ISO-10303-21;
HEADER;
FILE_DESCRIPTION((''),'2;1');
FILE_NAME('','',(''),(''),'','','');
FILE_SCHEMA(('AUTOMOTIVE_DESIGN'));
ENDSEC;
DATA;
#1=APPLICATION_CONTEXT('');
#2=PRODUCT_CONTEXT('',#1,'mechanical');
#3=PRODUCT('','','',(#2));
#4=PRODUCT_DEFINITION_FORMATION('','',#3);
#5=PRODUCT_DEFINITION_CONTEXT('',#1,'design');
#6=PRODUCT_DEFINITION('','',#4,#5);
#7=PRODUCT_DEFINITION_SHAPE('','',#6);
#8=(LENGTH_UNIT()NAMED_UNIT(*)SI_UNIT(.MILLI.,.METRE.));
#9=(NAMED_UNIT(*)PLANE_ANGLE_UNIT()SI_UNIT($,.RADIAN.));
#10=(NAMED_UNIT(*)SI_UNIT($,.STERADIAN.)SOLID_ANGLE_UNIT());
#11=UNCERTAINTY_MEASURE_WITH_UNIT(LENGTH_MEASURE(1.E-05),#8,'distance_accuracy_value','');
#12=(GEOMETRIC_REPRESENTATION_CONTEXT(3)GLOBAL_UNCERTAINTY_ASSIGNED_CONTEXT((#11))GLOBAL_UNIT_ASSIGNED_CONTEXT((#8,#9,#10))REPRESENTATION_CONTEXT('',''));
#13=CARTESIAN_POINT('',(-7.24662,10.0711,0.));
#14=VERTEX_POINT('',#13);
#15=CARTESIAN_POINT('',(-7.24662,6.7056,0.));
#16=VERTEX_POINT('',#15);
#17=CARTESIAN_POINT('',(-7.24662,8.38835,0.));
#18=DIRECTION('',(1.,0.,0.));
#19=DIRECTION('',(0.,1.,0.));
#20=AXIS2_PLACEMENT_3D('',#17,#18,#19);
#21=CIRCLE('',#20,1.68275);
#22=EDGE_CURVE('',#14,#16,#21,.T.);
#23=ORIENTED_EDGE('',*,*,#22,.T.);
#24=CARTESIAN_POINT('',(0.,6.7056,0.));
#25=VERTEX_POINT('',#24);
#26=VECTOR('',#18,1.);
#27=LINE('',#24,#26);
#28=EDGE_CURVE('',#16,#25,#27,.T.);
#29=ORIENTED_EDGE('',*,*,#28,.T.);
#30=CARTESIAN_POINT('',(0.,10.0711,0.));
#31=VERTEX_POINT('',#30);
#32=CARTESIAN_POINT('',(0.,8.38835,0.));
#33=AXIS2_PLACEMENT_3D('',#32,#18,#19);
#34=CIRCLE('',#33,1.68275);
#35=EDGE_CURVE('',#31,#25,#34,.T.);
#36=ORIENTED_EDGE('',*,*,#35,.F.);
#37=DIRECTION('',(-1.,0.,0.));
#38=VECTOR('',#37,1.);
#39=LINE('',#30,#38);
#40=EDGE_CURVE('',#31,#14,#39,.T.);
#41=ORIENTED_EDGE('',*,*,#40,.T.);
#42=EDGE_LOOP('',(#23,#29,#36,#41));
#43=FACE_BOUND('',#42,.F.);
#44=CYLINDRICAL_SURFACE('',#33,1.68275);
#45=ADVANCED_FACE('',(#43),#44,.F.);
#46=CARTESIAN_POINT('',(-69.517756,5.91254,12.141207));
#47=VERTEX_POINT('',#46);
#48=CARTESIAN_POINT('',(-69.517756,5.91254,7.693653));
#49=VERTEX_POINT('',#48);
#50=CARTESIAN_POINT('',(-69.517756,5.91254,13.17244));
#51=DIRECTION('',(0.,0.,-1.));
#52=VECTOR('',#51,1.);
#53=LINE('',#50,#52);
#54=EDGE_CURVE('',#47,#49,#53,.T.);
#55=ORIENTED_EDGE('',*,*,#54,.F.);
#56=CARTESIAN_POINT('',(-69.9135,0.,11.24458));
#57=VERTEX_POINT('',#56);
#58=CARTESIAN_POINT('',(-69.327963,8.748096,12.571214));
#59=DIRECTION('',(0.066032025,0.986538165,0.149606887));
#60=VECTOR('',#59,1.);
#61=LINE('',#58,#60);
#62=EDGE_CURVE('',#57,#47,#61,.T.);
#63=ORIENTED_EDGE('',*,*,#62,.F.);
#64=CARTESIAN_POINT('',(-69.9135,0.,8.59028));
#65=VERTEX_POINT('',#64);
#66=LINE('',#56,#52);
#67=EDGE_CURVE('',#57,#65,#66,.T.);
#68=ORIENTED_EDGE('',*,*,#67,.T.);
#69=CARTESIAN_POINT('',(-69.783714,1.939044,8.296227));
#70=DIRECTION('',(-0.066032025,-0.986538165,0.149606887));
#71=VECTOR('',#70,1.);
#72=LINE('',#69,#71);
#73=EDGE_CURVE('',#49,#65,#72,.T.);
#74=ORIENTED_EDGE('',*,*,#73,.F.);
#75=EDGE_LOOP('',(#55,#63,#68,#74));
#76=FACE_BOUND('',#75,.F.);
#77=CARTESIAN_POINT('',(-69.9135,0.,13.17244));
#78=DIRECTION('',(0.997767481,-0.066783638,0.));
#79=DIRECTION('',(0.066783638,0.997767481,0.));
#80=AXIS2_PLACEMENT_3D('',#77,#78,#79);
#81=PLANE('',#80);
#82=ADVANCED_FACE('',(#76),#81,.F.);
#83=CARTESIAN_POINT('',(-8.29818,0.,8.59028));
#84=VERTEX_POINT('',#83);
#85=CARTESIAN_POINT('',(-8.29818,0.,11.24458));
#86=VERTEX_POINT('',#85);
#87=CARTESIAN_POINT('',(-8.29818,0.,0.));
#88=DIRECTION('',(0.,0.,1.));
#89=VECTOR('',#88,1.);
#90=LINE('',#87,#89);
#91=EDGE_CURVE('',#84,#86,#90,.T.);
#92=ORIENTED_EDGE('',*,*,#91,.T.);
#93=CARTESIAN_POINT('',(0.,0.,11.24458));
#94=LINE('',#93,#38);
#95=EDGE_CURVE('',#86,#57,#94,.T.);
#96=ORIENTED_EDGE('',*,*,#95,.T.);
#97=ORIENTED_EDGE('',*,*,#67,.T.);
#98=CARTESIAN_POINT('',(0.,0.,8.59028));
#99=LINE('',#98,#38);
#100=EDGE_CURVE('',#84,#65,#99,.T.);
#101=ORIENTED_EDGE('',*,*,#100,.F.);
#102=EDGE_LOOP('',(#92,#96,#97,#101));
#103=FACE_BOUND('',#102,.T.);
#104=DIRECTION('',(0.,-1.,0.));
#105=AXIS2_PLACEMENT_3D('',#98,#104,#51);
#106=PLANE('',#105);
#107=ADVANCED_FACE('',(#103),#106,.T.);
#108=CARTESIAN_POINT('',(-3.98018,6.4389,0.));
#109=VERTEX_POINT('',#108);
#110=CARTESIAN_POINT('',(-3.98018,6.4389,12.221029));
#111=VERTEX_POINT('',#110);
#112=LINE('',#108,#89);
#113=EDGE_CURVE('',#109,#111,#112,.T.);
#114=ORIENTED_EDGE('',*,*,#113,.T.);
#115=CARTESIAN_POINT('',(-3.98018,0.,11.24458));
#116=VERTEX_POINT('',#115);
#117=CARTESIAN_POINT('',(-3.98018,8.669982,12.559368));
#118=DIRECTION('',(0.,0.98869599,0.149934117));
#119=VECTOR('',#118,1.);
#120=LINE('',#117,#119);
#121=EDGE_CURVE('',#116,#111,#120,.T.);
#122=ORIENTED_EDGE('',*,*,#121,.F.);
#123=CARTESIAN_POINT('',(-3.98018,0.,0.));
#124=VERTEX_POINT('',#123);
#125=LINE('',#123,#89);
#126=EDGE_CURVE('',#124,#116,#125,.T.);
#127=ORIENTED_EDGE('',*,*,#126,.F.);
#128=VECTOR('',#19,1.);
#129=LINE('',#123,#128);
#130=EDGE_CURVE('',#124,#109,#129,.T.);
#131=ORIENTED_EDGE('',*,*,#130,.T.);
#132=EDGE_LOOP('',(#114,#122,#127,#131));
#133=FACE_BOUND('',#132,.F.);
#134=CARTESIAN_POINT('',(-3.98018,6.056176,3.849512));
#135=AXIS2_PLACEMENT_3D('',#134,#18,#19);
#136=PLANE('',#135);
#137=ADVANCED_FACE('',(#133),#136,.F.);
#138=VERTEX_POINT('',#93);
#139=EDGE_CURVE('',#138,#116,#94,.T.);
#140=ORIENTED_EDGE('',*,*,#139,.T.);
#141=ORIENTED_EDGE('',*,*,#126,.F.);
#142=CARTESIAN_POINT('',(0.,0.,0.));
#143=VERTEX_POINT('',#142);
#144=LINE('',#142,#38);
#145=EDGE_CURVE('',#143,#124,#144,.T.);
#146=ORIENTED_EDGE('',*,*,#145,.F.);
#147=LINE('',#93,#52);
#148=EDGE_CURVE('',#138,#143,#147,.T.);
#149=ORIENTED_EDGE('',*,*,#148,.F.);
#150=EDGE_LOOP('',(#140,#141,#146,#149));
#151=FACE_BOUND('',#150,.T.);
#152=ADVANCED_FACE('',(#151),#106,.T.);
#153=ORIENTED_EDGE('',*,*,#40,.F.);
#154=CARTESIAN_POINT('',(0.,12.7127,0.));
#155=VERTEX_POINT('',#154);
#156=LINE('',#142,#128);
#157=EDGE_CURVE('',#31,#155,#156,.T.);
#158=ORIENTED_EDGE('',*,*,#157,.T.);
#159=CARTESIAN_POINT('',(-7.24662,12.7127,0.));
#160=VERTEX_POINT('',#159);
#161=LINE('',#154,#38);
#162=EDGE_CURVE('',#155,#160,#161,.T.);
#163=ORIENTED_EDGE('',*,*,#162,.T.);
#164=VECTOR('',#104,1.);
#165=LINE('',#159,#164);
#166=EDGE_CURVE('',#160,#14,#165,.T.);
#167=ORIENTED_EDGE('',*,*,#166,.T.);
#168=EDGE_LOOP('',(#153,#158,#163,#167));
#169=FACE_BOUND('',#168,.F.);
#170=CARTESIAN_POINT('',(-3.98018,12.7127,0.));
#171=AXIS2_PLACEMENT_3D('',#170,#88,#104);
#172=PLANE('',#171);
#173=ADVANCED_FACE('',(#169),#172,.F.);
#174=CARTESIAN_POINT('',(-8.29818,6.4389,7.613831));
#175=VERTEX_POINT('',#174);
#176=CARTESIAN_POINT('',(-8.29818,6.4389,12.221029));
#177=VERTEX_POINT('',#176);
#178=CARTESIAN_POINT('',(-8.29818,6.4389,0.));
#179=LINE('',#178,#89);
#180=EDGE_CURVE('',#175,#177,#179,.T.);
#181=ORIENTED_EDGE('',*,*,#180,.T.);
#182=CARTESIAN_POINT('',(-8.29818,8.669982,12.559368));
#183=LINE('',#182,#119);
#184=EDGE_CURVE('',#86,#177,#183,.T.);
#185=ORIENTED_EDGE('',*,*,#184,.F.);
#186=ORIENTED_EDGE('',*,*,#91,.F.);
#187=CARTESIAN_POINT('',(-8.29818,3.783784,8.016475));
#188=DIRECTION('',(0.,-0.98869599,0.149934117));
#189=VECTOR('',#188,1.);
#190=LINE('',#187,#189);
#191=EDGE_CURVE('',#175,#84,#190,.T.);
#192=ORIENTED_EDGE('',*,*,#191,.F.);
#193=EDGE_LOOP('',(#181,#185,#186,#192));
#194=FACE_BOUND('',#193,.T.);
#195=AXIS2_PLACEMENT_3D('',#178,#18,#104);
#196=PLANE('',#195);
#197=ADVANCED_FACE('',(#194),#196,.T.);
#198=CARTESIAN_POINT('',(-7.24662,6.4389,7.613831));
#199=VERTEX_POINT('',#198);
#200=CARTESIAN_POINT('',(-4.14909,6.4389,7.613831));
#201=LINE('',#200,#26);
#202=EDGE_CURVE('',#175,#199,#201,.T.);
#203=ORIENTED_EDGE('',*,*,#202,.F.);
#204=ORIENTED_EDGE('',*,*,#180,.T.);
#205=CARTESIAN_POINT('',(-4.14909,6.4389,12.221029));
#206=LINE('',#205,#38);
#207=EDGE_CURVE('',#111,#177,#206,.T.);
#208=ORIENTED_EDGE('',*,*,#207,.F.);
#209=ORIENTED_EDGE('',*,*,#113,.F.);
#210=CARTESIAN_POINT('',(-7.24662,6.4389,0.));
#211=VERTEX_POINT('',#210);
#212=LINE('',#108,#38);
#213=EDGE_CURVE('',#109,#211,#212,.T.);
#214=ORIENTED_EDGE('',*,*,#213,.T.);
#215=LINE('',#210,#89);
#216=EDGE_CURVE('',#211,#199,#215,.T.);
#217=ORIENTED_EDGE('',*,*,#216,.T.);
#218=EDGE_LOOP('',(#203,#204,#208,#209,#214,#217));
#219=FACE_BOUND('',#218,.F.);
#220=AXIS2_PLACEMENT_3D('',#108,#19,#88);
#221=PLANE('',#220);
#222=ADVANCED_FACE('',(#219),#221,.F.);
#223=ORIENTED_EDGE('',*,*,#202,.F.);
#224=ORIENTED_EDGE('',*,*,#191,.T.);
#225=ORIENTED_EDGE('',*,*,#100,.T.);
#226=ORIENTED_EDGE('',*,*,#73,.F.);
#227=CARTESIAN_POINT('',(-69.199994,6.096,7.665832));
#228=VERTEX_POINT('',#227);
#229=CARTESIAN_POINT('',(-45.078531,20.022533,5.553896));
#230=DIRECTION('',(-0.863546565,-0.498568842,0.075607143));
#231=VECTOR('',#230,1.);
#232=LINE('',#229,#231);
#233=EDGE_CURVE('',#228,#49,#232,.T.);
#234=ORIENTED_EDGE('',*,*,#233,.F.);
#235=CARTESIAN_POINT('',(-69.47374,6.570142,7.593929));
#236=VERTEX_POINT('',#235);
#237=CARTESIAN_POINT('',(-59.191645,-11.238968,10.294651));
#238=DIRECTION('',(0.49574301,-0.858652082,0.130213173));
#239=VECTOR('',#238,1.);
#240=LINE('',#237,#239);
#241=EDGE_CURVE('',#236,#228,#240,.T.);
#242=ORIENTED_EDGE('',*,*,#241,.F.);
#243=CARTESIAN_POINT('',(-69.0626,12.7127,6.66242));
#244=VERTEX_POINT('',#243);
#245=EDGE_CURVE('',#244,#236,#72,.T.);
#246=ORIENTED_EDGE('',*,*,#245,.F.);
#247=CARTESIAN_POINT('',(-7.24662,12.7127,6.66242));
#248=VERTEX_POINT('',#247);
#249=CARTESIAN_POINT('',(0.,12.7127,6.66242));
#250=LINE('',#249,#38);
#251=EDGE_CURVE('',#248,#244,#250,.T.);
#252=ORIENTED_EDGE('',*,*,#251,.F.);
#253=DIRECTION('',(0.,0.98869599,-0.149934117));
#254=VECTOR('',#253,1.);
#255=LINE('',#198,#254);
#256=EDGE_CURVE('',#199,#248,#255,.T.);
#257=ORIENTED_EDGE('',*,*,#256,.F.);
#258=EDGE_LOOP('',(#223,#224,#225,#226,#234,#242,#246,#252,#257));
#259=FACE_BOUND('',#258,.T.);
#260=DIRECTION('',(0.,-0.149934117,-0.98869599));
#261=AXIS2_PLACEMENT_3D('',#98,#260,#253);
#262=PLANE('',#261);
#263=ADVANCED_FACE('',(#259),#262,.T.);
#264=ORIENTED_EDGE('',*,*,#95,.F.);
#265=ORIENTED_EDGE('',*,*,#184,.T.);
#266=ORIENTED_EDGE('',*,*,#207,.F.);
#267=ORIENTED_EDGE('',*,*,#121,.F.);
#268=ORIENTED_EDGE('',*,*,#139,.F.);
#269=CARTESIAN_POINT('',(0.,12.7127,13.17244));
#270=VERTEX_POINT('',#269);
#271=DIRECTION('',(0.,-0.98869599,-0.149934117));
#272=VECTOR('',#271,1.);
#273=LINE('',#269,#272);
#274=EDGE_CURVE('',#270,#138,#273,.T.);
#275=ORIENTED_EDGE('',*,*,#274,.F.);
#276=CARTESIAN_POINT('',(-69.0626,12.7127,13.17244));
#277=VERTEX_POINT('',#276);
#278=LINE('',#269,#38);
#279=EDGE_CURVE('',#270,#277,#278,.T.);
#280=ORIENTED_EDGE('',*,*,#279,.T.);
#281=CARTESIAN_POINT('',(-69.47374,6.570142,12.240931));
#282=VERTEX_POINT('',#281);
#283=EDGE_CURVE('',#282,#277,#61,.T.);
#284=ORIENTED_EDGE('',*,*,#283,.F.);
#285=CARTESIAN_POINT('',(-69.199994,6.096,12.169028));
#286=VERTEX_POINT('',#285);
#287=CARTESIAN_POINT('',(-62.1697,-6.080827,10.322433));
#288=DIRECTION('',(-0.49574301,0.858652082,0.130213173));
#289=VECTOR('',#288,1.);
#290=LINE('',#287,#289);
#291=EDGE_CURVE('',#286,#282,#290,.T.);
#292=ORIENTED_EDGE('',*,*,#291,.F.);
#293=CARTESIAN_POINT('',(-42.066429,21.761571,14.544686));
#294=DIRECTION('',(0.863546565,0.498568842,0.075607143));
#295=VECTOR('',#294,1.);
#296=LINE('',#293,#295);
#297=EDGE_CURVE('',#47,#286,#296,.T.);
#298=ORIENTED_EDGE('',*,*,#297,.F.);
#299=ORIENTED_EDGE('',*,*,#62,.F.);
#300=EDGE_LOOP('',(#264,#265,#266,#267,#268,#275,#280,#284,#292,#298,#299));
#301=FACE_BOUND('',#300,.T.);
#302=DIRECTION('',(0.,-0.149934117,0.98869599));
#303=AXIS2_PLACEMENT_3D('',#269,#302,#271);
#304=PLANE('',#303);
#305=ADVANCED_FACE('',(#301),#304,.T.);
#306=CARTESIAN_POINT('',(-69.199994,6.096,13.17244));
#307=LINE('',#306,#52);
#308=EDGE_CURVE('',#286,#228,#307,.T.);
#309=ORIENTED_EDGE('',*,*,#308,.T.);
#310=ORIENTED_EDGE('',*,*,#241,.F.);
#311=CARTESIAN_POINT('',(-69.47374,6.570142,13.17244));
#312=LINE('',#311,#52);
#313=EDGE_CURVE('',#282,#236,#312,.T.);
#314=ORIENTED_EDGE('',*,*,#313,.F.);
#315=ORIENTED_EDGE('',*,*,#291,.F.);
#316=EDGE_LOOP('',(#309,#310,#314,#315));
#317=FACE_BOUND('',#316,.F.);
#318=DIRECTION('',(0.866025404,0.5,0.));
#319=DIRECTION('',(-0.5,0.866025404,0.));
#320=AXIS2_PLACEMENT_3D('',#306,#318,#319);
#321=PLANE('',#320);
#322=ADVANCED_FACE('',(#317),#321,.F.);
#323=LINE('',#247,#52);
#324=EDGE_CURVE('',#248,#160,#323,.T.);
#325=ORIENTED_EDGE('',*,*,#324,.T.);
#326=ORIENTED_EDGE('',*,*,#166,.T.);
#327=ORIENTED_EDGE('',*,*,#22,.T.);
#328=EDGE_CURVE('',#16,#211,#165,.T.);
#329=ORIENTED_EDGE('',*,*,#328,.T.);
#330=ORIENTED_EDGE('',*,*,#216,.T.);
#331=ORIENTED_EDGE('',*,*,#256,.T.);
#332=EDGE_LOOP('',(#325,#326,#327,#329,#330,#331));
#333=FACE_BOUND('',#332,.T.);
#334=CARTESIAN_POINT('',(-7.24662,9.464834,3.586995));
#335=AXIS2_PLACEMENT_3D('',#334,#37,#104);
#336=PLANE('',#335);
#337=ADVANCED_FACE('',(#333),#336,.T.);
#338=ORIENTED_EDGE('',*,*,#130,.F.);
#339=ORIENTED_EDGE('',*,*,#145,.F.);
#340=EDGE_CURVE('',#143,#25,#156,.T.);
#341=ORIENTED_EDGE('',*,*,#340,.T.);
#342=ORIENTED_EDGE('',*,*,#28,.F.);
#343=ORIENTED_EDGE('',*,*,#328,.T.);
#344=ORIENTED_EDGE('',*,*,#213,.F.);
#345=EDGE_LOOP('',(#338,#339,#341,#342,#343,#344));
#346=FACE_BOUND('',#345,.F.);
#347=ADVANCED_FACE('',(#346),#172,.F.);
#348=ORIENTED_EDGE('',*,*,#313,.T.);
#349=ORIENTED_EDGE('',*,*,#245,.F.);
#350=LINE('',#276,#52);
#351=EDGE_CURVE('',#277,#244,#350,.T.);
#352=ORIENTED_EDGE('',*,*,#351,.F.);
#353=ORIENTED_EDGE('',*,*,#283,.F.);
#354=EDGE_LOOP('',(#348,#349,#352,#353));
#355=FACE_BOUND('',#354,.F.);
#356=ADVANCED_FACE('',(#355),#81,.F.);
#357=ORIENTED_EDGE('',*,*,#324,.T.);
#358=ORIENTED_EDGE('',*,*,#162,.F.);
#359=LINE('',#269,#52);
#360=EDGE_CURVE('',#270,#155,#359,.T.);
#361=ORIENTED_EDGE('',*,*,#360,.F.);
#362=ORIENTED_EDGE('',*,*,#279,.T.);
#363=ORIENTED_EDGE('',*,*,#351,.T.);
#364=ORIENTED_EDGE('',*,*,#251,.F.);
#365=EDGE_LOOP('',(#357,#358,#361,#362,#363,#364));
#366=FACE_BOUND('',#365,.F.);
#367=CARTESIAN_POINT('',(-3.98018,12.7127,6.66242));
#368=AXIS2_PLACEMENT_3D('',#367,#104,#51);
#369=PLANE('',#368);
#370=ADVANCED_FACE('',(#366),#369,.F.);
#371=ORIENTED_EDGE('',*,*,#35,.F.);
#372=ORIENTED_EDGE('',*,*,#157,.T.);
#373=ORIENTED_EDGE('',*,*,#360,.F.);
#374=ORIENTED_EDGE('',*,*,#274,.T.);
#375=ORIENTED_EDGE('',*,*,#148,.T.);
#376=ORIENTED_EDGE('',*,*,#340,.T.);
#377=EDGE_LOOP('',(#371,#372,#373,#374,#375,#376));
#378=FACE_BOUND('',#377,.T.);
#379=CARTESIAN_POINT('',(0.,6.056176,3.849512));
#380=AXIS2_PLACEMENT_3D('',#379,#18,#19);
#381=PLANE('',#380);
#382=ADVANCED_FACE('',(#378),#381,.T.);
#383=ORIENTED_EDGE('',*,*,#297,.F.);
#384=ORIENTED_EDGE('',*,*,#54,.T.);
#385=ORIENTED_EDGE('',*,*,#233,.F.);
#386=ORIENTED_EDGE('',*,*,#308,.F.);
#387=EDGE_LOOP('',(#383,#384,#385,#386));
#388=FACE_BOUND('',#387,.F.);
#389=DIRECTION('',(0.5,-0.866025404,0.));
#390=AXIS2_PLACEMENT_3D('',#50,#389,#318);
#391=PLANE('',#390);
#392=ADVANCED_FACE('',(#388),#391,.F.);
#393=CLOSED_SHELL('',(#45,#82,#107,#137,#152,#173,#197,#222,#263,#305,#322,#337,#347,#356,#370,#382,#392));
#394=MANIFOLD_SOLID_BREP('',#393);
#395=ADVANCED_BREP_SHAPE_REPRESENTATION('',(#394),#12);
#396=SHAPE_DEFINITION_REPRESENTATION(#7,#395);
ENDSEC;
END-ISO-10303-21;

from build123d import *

# Parameters (mm, degrees)
F5_DEPTH  = 69.9135
F7_DEPTH  = 3.98018
F9_DEPTH  = 3.26644
F10_W     = 4.318
F10_H     = 6.4389
F11_DEPTH = 25.4
F12_R     = 1.68275
F13_DEPTH = 69.9145
F16_DEPTH = 13.17344
F18_DEPTH = 13.17344


# Not quite as in the source:
# - a variable given as a bare number and used for a length is read in inches; the dataset says mm whatever the document's units were


with BuildPart() as f5:
    # F4 (on Right) → F5 (new body)
    with BuildSketch(Plane.YZ):
        Polygon((12.7127, 13.17244), (0, 11.24458), (0, 8.59028), (12.7127, 6.66242), align=None)
    extrude(amount=-F5_DEPTH)

    # F6 (on face) → F7 (join)
    with BuildSketch(Plane.YZ):
        Polygon((12.7127, 0), (12.7127, 6.66242), (0, 8.59028), (0, 0), align=None)
    extrude(amount=-F7_DEPTH)

    # F8 (on face) → F9 (join)
    with BuildSketch(Plane(origin=(-3.98018, 0, 0), x_dir=(0, -1, 0), z_dir=(-1, 0, 0))):
        Polygon((-6.4389, 7.6138314286), (-12.7127, 6.66242), (-12.7127, 0), (-6.4389, 0), align=None)
    extrude(amount=F9_DEPTH)

    # F10 (on face) → F11 (cut)
    with BuildSketch(Plane(origin=(0, 0, 0), x_dir=(1, 0, 0), z_dir=(0, 0, -1))):
        with Locations((-6.13918, -3.21945)):
            Rectangle(F10_W, F10_H)
    extrude(amount=-F11_DEPTH, mode=Mode.SUBTRACT)

    # F12 (on face) → F13 (cut, through all)
    with BuildSketch(Plane.YZ):
        with Locations((8.38835, 0)):
            Circle(F12_R)
    extrude(amount=-F13_DEPTH, mode=Mode.SUBTRACT)

    # F15 (on offset) → F16 (cut, through all)
    with BuildSketch(Plane.XY.offset(13.17244)):
        Polygon((-69.9135, 12.7127), (-69.9135, 0), (-69.0626, 12.7127), align=None)
    extrude(amount=-F16_DEPTH, mode=Mode.SUBTRACT)

    # F17 (on offset) → F18 (cut, through all)
    with BuildSketch(Plane.XY.offset(13.17244)):
        Polygon((-69.1999940296, 6.096), (-69.4737402245, 6.570142318), (-69.5177555441, 5.9125403041), align=None)
    extrude(amount=-F18_DEPTH, mode=Mode.SUBTRACT)


solid = f5.part
